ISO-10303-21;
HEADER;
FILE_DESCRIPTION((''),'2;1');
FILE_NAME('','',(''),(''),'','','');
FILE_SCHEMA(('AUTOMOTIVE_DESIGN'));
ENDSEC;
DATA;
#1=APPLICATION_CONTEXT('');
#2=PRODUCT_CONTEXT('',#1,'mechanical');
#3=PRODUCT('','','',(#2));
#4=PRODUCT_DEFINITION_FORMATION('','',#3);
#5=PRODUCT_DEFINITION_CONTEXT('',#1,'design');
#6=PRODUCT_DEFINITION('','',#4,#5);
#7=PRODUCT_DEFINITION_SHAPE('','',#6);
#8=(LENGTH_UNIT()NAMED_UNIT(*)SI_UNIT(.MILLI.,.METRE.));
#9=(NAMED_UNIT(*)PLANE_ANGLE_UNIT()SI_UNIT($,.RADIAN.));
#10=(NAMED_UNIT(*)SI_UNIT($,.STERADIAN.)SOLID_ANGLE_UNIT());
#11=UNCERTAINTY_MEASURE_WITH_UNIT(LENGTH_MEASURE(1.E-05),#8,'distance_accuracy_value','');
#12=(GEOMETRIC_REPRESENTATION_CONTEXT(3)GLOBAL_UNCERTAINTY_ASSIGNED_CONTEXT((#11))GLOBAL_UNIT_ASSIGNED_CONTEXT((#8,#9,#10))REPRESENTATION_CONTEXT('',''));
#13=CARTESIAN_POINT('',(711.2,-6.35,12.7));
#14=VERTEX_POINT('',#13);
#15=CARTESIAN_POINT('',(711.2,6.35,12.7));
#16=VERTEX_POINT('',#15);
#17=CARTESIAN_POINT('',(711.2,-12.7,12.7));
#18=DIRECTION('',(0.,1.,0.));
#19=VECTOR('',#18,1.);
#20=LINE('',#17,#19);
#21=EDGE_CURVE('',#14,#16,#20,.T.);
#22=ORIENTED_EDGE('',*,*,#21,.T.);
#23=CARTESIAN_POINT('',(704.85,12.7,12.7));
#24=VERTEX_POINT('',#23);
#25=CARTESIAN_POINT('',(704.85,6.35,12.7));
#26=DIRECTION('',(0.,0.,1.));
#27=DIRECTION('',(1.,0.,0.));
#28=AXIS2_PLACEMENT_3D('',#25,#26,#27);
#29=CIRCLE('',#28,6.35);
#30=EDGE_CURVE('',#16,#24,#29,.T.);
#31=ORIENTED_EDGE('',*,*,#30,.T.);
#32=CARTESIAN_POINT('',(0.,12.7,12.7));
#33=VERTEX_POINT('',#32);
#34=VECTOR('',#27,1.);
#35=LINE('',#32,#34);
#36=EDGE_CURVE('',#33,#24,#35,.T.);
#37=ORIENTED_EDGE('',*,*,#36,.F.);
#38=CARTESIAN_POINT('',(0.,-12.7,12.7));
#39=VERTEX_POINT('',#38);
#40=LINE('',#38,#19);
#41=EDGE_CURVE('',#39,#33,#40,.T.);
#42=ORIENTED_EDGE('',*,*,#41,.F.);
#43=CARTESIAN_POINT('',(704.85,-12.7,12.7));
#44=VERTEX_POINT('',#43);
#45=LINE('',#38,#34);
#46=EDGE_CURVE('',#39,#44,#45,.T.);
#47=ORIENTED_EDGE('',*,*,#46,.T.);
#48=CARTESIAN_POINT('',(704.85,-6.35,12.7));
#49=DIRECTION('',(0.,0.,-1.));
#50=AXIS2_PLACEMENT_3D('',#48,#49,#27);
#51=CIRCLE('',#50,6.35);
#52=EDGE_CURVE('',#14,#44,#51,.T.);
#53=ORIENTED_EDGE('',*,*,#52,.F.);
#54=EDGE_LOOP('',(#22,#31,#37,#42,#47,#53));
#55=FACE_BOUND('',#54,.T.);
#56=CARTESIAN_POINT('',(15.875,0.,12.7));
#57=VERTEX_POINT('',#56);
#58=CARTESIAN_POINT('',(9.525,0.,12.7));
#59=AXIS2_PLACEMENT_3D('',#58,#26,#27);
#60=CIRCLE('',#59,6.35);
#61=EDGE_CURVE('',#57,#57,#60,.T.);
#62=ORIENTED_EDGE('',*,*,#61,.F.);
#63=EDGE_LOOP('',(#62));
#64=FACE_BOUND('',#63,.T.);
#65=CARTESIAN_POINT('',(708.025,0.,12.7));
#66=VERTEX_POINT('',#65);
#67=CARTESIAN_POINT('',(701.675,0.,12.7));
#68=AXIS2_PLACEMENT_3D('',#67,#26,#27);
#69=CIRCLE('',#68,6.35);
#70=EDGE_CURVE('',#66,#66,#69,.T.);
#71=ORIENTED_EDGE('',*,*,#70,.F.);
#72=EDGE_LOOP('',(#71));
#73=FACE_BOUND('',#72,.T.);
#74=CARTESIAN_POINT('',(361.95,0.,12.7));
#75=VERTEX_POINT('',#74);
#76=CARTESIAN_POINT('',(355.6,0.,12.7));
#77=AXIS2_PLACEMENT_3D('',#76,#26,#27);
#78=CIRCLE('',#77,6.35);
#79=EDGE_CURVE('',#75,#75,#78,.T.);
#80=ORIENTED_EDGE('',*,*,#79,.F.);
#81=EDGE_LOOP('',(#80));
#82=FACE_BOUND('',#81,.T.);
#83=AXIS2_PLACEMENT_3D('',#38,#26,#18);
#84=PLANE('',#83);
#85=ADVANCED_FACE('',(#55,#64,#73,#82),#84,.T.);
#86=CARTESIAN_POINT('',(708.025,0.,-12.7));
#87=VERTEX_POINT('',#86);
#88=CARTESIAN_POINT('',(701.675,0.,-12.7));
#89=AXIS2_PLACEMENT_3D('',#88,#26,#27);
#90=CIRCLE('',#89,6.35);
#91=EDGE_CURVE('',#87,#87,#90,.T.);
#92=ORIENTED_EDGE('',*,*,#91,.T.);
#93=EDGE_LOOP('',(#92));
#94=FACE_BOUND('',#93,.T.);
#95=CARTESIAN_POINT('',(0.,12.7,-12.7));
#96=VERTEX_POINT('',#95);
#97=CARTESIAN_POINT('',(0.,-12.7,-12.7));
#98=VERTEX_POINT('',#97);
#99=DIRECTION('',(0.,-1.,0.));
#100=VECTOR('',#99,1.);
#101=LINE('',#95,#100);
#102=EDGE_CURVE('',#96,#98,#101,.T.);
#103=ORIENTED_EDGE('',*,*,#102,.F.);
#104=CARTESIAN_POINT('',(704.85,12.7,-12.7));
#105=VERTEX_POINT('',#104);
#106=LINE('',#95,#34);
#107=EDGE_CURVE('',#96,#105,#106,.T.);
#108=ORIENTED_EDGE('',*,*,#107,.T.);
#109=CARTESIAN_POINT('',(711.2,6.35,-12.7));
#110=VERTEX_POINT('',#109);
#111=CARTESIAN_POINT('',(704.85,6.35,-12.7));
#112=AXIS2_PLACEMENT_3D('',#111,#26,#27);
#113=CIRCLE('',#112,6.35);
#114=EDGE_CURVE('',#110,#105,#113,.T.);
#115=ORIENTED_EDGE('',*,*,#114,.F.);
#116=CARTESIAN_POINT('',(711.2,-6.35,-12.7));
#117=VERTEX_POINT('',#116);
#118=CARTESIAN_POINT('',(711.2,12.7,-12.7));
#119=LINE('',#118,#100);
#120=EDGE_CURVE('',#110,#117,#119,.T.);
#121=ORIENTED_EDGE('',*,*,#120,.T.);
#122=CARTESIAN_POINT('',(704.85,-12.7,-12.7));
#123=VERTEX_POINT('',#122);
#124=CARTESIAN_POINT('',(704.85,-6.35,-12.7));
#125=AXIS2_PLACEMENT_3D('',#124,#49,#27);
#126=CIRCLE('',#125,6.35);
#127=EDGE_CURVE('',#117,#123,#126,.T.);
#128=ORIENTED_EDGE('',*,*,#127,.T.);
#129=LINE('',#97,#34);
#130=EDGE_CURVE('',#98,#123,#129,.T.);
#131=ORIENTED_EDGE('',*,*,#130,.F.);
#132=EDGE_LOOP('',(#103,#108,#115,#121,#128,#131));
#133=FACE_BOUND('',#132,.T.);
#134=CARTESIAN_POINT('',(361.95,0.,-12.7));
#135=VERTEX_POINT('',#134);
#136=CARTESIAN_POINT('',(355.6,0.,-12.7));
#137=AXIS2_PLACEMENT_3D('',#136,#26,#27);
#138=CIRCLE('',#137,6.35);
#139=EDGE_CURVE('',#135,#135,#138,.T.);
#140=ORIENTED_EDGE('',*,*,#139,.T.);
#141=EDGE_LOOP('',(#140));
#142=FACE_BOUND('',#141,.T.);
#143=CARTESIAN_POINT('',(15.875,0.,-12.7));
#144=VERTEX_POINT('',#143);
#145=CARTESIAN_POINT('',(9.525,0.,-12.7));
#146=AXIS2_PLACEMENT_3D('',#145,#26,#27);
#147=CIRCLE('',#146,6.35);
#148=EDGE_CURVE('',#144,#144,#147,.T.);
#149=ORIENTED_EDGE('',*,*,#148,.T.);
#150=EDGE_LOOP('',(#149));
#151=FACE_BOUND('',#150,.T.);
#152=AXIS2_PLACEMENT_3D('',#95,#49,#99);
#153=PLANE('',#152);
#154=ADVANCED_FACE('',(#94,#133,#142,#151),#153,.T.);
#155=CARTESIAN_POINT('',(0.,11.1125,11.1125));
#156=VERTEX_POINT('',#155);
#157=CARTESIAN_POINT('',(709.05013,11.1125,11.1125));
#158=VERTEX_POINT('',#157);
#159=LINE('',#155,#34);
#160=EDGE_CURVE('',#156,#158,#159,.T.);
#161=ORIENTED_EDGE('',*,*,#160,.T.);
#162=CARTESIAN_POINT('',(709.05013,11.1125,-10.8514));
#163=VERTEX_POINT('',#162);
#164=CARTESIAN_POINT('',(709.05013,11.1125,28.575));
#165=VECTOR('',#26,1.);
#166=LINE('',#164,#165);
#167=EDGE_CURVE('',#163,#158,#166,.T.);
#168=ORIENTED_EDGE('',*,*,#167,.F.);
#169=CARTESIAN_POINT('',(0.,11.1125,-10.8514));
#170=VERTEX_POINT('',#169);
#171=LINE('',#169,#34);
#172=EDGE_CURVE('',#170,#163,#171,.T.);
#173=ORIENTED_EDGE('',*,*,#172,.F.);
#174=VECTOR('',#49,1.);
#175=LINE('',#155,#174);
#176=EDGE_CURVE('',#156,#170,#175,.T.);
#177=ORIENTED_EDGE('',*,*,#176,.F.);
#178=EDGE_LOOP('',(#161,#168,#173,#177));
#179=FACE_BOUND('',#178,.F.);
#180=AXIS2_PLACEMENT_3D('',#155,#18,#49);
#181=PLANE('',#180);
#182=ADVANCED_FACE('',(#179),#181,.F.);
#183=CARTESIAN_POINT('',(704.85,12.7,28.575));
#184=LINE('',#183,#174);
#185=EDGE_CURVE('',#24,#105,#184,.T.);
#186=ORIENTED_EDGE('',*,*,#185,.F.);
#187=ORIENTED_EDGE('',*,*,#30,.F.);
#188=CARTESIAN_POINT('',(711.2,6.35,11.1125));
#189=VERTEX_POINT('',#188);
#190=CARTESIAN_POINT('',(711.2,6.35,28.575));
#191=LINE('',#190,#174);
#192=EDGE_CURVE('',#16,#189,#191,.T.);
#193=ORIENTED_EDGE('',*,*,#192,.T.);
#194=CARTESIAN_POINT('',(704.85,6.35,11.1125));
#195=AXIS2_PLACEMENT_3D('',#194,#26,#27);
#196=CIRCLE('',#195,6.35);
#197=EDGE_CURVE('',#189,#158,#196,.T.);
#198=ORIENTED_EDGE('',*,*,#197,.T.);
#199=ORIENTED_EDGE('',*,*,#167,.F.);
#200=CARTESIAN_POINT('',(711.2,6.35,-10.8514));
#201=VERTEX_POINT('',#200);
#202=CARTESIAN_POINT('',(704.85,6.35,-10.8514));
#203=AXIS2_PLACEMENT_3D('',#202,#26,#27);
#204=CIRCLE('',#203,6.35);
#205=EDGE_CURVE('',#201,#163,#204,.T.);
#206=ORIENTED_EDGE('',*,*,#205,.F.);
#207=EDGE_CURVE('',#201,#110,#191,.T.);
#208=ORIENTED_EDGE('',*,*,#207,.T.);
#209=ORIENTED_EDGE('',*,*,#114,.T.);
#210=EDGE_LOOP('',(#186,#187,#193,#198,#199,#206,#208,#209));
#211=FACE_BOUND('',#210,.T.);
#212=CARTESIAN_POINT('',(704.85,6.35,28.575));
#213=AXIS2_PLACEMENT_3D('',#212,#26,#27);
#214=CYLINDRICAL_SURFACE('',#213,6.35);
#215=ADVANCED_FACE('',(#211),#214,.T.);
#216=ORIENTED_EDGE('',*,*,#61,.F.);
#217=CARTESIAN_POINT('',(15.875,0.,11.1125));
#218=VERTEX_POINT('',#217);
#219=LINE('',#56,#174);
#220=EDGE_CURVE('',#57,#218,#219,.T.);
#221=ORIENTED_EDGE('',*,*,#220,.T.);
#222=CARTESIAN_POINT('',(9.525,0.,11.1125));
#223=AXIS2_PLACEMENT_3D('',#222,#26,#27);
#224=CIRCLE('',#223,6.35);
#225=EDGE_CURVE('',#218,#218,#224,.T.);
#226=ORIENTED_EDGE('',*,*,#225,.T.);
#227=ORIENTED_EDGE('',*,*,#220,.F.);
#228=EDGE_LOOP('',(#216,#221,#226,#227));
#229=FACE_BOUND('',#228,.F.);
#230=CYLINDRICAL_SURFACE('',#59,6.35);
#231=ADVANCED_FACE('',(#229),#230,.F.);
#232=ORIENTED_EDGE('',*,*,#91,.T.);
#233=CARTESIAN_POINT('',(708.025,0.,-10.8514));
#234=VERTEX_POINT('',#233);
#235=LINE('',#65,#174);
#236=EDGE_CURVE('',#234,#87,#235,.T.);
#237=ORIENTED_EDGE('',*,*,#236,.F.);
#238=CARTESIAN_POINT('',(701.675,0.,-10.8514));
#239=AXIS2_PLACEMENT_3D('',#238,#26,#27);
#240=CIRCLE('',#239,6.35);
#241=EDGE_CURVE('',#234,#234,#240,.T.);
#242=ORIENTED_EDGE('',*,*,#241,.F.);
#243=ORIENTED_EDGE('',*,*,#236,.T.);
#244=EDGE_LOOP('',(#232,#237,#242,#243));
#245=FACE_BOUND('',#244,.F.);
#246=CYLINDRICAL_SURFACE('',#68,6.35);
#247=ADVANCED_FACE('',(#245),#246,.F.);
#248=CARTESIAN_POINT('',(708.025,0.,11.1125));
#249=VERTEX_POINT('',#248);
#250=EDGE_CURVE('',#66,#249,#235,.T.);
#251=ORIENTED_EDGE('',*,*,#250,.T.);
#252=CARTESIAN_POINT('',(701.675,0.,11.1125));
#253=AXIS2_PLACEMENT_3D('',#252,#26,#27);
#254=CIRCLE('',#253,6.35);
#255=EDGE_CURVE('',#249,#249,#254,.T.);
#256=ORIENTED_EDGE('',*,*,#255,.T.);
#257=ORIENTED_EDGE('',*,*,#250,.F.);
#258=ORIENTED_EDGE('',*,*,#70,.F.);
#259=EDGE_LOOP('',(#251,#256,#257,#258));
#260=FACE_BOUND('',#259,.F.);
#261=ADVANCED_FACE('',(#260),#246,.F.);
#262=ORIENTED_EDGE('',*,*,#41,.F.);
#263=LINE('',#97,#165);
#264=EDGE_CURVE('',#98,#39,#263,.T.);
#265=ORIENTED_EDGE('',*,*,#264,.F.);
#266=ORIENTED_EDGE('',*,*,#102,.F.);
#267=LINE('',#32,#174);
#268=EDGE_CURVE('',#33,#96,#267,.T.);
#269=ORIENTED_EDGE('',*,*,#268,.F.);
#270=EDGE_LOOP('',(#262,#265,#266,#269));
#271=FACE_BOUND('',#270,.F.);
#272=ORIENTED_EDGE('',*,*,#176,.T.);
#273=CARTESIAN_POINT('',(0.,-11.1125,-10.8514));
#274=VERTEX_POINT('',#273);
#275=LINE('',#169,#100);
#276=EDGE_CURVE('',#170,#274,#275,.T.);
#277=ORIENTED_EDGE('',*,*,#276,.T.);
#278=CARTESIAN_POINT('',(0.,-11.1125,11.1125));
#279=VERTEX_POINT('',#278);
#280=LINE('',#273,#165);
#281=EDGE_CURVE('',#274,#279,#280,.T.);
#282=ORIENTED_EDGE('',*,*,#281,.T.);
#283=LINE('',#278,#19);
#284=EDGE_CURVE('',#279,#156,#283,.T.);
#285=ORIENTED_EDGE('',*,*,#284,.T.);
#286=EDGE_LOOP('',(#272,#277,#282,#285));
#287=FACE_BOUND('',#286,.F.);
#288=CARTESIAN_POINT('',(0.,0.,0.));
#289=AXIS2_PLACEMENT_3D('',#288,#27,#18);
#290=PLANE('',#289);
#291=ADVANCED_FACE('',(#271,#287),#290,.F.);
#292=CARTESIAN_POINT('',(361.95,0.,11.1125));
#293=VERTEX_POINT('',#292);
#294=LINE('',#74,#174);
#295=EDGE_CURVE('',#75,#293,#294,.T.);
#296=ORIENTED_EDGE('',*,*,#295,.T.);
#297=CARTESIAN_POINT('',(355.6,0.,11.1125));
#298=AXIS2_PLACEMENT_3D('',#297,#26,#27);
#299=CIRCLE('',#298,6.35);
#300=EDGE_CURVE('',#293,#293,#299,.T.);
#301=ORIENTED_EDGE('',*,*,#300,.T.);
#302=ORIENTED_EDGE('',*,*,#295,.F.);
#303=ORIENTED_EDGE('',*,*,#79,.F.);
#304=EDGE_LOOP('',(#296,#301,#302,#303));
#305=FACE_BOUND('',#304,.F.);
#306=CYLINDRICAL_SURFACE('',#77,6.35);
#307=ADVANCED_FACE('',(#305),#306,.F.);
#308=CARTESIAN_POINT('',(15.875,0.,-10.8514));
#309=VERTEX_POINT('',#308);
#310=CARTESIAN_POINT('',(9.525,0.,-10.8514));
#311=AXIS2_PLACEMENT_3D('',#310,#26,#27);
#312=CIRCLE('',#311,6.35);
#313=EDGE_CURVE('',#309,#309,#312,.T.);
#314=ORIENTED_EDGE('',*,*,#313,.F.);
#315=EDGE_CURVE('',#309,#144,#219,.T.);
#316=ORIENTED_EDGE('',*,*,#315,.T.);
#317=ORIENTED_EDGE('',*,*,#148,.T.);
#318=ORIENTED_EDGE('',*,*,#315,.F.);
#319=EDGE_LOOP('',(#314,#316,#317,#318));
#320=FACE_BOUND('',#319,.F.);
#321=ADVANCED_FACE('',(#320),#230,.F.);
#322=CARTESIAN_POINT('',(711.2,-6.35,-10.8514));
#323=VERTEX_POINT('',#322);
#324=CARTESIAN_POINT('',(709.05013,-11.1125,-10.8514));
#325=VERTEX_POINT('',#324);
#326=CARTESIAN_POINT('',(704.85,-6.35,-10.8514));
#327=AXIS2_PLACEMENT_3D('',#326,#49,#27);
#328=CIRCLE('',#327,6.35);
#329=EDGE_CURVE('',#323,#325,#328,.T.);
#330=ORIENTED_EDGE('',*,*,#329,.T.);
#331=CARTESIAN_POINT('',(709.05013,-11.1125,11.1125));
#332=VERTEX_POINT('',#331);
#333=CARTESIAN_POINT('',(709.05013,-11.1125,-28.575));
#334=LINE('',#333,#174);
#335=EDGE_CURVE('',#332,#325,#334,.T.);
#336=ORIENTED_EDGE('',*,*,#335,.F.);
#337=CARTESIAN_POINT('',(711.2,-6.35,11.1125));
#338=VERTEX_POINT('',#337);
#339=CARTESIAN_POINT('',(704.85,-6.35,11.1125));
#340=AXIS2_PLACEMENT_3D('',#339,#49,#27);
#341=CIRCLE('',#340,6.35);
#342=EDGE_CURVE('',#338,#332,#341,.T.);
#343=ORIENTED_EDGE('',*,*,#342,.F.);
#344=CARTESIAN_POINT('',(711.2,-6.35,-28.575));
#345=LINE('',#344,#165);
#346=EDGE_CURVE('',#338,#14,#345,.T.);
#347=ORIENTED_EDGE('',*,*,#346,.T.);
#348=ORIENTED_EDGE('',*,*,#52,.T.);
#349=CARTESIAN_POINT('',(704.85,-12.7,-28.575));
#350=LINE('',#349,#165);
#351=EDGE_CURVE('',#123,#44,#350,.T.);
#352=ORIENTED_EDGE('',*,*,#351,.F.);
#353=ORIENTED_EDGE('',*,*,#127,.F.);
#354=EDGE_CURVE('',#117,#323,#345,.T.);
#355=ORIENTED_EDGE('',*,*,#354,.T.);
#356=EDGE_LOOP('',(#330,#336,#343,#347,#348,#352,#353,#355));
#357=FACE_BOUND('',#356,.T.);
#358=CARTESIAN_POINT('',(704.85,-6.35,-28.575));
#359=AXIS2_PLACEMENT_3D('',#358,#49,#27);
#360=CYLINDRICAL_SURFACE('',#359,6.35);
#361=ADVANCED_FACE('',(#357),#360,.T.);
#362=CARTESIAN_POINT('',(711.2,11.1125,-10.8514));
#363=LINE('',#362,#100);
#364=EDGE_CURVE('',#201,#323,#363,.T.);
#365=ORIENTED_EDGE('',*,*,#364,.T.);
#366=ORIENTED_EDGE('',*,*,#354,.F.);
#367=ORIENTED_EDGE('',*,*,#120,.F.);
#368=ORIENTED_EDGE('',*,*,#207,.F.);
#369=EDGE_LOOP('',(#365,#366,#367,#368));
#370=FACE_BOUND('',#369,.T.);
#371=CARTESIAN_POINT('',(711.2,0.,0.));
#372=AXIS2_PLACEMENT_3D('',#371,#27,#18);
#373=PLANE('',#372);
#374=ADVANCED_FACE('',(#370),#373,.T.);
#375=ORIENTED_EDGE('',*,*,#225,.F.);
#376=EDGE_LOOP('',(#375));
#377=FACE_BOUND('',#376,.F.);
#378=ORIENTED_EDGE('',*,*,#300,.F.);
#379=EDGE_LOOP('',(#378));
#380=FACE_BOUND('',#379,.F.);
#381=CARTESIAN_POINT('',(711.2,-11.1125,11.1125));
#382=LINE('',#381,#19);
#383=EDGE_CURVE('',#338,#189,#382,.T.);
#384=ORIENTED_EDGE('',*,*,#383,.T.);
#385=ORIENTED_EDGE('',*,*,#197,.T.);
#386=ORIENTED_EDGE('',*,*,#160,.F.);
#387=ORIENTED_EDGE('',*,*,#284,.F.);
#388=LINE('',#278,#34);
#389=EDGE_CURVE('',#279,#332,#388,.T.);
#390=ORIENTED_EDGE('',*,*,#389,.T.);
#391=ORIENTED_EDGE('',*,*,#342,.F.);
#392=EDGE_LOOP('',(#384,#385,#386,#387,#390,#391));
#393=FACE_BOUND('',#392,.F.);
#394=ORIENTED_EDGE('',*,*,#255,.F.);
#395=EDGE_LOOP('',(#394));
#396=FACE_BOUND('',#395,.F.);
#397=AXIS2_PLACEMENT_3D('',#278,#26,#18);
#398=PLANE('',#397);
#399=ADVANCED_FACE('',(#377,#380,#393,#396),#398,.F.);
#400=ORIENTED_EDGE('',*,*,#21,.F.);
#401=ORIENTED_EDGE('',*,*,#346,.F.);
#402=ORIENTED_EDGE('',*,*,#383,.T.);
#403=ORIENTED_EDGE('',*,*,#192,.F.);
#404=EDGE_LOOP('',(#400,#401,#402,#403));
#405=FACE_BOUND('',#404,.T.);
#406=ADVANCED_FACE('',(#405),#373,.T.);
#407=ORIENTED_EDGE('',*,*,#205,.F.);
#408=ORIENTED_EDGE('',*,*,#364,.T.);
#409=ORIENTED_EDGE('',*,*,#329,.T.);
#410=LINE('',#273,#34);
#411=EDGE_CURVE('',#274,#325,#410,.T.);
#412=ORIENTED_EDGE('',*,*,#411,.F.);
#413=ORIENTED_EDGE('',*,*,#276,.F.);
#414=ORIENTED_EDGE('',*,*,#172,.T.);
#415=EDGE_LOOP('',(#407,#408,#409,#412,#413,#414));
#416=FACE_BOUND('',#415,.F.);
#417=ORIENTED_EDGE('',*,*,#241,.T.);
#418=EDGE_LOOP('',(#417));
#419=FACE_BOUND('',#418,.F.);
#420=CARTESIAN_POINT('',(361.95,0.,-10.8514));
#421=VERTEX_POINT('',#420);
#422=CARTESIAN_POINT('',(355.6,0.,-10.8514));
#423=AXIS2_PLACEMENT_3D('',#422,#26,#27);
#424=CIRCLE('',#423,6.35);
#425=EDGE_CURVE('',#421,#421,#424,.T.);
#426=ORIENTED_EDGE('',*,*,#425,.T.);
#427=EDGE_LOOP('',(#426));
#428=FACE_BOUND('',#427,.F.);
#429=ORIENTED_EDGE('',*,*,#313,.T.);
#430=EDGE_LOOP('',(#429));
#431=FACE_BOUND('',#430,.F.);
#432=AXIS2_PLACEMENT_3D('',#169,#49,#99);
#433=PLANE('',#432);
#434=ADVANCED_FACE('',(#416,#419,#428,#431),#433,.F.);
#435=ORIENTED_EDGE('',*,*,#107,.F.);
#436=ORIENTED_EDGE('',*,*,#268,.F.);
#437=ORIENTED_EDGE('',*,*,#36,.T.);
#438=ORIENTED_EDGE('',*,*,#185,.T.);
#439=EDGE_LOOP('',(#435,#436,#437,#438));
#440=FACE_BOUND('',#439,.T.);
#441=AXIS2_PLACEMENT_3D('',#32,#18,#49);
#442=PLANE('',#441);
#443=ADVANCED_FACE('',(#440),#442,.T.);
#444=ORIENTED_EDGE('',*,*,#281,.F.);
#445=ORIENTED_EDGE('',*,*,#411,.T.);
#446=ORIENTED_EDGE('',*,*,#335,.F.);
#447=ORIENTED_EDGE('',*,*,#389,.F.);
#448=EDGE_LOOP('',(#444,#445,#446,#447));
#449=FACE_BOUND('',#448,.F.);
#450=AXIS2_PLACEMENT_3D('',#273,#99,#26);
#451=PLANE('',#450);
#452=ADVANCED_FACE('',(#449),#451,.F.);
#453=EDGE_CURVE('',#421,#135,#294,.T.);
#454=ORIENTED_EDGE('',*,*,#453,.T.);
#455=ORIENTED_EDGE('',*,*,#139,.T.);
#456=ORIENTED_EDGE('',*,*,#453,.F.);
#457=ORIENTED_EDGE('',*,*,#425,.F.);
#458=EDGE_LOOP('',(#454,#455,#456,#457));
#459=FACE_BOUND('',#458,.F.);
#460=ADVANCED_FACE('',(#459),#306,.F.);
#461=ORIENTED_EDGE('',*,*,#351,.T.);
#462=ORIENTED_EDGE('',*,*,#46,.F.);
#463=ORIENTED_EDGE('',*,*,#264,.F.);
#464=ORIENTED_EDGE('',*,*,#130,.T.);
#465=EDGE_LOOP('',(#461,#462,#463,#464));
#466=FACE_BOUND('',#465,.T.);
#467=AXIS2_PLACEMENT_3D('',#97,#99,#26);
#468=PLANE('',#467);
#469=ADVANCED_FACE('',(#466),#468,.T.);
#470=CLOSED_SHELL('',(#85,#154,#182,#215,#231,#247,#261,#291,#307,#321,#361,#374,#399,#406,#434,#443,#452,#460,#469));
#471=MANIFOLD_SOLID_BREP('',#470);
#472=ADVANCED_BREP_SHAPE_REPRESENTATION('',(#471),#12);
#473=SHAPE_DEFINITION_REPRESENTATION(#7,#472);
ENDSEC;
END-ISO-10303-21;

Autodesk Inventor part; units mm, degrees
ref_plane "YZ Plane" through (0, 0, 0) normal (1, 0, 0) x (0, 1, 0)
ref_plane "XZ Plane" through (0, 0, 0) normal (0, 1, 0) x (-1, 0, 0)
ref_plane "XY Plane" through (0, 0, 0) normal (0, 0, 1) x (1, 0, 0)
sketch "Sketch1" plane through (0, 0, 0) normal (1, 0, 0) x (0, 1, 0)
  line L0 (-12.7, 12.7) -> (12.7, 12.7)
  line L1 (12.7, 12.7) -> (12.7, -12.7)
  line L2 (12.7, -12.7) -> (-12.7, -12.7)
  line L3 (-12.7, -12.7) -> (-12.7, 12.7)
  line L4 (-11.1125, 11.1125) -> (11.1125, 11.1125)
  line L5 (11.1125, 11.1125) -> (11.1125, -10.8514)
  line L6 (11.1125, -10.8514) -> (-11.1125, -10.8514)
  line L7 (-11.1125, -10.8514) -> (-11.1125, 11.1125)
  point P0 (0, 0)
  point P1 (0, 12.7)
  point P2 (-12.7, 0)
  dimension "d0" = 25.4
  dimension "d1" = 25.4
  dimension "d2" = 1.5875
  dimension "d3" = 1.5875
  dimension "d4" = 1.5875
extrude "Extrusion1" add sketch "Sketch1" along normal blind 711.2
sketch "Sketch2" plane through (0, -12.7, 12.7) normal (0, 0, 1) x (1, 0, 0)
  circle A0 centre (9.525, 12.7) radius 6.35
  circle A1 centre (701.675, 12.7) radius 6.35
  line L0 (711.2, 25.4) -> (711.2, 0) projected
  line L1 (0, 0) -> (0, 25.4) projected
  line L2 (0, 0) -> (711.2, 0) projected
  circle A2 centre (355.6, 12.7) radius 6.35
  point P0 (0, 12.7)
  point P1 (395.7549, 0)
  point P2 (355.6, 0)
  dimension "d7" = 12.7
  dimension "d8" = 9.525
  dimension "d9" = 12.7
  dimension "d10" = 9.525
  dimension "d17" = 12.7
  dimension "d23" = 355.6
  dimension "BarLengthRef" = 711.2
extrude "Extrusion2" cut sketch "Sketch2" against normal blind 50.8 contours A0 | A1
extrude "Extrusion4" cut sketch "Sketch2" against normal blind 25.4 contours A2
fillet "Fillet1" radius 6.35 1 edges at (711.2, 12.7, 0)
fillet "Fillet2" radius 6.35 1 edges at (711.2, -12.7, 0)
equation "\"d1\" = d0"
equation "\"d3\" = d2"
equation "\"d4\" = d2"
equation "\"d9\" = d7"
equation "\"d10\" = d8"
equation "\"d17\" = d7"
equation "\"d23\" = 0.5 * BarLengthRef"
properties part number "Long Bar Offset center"
